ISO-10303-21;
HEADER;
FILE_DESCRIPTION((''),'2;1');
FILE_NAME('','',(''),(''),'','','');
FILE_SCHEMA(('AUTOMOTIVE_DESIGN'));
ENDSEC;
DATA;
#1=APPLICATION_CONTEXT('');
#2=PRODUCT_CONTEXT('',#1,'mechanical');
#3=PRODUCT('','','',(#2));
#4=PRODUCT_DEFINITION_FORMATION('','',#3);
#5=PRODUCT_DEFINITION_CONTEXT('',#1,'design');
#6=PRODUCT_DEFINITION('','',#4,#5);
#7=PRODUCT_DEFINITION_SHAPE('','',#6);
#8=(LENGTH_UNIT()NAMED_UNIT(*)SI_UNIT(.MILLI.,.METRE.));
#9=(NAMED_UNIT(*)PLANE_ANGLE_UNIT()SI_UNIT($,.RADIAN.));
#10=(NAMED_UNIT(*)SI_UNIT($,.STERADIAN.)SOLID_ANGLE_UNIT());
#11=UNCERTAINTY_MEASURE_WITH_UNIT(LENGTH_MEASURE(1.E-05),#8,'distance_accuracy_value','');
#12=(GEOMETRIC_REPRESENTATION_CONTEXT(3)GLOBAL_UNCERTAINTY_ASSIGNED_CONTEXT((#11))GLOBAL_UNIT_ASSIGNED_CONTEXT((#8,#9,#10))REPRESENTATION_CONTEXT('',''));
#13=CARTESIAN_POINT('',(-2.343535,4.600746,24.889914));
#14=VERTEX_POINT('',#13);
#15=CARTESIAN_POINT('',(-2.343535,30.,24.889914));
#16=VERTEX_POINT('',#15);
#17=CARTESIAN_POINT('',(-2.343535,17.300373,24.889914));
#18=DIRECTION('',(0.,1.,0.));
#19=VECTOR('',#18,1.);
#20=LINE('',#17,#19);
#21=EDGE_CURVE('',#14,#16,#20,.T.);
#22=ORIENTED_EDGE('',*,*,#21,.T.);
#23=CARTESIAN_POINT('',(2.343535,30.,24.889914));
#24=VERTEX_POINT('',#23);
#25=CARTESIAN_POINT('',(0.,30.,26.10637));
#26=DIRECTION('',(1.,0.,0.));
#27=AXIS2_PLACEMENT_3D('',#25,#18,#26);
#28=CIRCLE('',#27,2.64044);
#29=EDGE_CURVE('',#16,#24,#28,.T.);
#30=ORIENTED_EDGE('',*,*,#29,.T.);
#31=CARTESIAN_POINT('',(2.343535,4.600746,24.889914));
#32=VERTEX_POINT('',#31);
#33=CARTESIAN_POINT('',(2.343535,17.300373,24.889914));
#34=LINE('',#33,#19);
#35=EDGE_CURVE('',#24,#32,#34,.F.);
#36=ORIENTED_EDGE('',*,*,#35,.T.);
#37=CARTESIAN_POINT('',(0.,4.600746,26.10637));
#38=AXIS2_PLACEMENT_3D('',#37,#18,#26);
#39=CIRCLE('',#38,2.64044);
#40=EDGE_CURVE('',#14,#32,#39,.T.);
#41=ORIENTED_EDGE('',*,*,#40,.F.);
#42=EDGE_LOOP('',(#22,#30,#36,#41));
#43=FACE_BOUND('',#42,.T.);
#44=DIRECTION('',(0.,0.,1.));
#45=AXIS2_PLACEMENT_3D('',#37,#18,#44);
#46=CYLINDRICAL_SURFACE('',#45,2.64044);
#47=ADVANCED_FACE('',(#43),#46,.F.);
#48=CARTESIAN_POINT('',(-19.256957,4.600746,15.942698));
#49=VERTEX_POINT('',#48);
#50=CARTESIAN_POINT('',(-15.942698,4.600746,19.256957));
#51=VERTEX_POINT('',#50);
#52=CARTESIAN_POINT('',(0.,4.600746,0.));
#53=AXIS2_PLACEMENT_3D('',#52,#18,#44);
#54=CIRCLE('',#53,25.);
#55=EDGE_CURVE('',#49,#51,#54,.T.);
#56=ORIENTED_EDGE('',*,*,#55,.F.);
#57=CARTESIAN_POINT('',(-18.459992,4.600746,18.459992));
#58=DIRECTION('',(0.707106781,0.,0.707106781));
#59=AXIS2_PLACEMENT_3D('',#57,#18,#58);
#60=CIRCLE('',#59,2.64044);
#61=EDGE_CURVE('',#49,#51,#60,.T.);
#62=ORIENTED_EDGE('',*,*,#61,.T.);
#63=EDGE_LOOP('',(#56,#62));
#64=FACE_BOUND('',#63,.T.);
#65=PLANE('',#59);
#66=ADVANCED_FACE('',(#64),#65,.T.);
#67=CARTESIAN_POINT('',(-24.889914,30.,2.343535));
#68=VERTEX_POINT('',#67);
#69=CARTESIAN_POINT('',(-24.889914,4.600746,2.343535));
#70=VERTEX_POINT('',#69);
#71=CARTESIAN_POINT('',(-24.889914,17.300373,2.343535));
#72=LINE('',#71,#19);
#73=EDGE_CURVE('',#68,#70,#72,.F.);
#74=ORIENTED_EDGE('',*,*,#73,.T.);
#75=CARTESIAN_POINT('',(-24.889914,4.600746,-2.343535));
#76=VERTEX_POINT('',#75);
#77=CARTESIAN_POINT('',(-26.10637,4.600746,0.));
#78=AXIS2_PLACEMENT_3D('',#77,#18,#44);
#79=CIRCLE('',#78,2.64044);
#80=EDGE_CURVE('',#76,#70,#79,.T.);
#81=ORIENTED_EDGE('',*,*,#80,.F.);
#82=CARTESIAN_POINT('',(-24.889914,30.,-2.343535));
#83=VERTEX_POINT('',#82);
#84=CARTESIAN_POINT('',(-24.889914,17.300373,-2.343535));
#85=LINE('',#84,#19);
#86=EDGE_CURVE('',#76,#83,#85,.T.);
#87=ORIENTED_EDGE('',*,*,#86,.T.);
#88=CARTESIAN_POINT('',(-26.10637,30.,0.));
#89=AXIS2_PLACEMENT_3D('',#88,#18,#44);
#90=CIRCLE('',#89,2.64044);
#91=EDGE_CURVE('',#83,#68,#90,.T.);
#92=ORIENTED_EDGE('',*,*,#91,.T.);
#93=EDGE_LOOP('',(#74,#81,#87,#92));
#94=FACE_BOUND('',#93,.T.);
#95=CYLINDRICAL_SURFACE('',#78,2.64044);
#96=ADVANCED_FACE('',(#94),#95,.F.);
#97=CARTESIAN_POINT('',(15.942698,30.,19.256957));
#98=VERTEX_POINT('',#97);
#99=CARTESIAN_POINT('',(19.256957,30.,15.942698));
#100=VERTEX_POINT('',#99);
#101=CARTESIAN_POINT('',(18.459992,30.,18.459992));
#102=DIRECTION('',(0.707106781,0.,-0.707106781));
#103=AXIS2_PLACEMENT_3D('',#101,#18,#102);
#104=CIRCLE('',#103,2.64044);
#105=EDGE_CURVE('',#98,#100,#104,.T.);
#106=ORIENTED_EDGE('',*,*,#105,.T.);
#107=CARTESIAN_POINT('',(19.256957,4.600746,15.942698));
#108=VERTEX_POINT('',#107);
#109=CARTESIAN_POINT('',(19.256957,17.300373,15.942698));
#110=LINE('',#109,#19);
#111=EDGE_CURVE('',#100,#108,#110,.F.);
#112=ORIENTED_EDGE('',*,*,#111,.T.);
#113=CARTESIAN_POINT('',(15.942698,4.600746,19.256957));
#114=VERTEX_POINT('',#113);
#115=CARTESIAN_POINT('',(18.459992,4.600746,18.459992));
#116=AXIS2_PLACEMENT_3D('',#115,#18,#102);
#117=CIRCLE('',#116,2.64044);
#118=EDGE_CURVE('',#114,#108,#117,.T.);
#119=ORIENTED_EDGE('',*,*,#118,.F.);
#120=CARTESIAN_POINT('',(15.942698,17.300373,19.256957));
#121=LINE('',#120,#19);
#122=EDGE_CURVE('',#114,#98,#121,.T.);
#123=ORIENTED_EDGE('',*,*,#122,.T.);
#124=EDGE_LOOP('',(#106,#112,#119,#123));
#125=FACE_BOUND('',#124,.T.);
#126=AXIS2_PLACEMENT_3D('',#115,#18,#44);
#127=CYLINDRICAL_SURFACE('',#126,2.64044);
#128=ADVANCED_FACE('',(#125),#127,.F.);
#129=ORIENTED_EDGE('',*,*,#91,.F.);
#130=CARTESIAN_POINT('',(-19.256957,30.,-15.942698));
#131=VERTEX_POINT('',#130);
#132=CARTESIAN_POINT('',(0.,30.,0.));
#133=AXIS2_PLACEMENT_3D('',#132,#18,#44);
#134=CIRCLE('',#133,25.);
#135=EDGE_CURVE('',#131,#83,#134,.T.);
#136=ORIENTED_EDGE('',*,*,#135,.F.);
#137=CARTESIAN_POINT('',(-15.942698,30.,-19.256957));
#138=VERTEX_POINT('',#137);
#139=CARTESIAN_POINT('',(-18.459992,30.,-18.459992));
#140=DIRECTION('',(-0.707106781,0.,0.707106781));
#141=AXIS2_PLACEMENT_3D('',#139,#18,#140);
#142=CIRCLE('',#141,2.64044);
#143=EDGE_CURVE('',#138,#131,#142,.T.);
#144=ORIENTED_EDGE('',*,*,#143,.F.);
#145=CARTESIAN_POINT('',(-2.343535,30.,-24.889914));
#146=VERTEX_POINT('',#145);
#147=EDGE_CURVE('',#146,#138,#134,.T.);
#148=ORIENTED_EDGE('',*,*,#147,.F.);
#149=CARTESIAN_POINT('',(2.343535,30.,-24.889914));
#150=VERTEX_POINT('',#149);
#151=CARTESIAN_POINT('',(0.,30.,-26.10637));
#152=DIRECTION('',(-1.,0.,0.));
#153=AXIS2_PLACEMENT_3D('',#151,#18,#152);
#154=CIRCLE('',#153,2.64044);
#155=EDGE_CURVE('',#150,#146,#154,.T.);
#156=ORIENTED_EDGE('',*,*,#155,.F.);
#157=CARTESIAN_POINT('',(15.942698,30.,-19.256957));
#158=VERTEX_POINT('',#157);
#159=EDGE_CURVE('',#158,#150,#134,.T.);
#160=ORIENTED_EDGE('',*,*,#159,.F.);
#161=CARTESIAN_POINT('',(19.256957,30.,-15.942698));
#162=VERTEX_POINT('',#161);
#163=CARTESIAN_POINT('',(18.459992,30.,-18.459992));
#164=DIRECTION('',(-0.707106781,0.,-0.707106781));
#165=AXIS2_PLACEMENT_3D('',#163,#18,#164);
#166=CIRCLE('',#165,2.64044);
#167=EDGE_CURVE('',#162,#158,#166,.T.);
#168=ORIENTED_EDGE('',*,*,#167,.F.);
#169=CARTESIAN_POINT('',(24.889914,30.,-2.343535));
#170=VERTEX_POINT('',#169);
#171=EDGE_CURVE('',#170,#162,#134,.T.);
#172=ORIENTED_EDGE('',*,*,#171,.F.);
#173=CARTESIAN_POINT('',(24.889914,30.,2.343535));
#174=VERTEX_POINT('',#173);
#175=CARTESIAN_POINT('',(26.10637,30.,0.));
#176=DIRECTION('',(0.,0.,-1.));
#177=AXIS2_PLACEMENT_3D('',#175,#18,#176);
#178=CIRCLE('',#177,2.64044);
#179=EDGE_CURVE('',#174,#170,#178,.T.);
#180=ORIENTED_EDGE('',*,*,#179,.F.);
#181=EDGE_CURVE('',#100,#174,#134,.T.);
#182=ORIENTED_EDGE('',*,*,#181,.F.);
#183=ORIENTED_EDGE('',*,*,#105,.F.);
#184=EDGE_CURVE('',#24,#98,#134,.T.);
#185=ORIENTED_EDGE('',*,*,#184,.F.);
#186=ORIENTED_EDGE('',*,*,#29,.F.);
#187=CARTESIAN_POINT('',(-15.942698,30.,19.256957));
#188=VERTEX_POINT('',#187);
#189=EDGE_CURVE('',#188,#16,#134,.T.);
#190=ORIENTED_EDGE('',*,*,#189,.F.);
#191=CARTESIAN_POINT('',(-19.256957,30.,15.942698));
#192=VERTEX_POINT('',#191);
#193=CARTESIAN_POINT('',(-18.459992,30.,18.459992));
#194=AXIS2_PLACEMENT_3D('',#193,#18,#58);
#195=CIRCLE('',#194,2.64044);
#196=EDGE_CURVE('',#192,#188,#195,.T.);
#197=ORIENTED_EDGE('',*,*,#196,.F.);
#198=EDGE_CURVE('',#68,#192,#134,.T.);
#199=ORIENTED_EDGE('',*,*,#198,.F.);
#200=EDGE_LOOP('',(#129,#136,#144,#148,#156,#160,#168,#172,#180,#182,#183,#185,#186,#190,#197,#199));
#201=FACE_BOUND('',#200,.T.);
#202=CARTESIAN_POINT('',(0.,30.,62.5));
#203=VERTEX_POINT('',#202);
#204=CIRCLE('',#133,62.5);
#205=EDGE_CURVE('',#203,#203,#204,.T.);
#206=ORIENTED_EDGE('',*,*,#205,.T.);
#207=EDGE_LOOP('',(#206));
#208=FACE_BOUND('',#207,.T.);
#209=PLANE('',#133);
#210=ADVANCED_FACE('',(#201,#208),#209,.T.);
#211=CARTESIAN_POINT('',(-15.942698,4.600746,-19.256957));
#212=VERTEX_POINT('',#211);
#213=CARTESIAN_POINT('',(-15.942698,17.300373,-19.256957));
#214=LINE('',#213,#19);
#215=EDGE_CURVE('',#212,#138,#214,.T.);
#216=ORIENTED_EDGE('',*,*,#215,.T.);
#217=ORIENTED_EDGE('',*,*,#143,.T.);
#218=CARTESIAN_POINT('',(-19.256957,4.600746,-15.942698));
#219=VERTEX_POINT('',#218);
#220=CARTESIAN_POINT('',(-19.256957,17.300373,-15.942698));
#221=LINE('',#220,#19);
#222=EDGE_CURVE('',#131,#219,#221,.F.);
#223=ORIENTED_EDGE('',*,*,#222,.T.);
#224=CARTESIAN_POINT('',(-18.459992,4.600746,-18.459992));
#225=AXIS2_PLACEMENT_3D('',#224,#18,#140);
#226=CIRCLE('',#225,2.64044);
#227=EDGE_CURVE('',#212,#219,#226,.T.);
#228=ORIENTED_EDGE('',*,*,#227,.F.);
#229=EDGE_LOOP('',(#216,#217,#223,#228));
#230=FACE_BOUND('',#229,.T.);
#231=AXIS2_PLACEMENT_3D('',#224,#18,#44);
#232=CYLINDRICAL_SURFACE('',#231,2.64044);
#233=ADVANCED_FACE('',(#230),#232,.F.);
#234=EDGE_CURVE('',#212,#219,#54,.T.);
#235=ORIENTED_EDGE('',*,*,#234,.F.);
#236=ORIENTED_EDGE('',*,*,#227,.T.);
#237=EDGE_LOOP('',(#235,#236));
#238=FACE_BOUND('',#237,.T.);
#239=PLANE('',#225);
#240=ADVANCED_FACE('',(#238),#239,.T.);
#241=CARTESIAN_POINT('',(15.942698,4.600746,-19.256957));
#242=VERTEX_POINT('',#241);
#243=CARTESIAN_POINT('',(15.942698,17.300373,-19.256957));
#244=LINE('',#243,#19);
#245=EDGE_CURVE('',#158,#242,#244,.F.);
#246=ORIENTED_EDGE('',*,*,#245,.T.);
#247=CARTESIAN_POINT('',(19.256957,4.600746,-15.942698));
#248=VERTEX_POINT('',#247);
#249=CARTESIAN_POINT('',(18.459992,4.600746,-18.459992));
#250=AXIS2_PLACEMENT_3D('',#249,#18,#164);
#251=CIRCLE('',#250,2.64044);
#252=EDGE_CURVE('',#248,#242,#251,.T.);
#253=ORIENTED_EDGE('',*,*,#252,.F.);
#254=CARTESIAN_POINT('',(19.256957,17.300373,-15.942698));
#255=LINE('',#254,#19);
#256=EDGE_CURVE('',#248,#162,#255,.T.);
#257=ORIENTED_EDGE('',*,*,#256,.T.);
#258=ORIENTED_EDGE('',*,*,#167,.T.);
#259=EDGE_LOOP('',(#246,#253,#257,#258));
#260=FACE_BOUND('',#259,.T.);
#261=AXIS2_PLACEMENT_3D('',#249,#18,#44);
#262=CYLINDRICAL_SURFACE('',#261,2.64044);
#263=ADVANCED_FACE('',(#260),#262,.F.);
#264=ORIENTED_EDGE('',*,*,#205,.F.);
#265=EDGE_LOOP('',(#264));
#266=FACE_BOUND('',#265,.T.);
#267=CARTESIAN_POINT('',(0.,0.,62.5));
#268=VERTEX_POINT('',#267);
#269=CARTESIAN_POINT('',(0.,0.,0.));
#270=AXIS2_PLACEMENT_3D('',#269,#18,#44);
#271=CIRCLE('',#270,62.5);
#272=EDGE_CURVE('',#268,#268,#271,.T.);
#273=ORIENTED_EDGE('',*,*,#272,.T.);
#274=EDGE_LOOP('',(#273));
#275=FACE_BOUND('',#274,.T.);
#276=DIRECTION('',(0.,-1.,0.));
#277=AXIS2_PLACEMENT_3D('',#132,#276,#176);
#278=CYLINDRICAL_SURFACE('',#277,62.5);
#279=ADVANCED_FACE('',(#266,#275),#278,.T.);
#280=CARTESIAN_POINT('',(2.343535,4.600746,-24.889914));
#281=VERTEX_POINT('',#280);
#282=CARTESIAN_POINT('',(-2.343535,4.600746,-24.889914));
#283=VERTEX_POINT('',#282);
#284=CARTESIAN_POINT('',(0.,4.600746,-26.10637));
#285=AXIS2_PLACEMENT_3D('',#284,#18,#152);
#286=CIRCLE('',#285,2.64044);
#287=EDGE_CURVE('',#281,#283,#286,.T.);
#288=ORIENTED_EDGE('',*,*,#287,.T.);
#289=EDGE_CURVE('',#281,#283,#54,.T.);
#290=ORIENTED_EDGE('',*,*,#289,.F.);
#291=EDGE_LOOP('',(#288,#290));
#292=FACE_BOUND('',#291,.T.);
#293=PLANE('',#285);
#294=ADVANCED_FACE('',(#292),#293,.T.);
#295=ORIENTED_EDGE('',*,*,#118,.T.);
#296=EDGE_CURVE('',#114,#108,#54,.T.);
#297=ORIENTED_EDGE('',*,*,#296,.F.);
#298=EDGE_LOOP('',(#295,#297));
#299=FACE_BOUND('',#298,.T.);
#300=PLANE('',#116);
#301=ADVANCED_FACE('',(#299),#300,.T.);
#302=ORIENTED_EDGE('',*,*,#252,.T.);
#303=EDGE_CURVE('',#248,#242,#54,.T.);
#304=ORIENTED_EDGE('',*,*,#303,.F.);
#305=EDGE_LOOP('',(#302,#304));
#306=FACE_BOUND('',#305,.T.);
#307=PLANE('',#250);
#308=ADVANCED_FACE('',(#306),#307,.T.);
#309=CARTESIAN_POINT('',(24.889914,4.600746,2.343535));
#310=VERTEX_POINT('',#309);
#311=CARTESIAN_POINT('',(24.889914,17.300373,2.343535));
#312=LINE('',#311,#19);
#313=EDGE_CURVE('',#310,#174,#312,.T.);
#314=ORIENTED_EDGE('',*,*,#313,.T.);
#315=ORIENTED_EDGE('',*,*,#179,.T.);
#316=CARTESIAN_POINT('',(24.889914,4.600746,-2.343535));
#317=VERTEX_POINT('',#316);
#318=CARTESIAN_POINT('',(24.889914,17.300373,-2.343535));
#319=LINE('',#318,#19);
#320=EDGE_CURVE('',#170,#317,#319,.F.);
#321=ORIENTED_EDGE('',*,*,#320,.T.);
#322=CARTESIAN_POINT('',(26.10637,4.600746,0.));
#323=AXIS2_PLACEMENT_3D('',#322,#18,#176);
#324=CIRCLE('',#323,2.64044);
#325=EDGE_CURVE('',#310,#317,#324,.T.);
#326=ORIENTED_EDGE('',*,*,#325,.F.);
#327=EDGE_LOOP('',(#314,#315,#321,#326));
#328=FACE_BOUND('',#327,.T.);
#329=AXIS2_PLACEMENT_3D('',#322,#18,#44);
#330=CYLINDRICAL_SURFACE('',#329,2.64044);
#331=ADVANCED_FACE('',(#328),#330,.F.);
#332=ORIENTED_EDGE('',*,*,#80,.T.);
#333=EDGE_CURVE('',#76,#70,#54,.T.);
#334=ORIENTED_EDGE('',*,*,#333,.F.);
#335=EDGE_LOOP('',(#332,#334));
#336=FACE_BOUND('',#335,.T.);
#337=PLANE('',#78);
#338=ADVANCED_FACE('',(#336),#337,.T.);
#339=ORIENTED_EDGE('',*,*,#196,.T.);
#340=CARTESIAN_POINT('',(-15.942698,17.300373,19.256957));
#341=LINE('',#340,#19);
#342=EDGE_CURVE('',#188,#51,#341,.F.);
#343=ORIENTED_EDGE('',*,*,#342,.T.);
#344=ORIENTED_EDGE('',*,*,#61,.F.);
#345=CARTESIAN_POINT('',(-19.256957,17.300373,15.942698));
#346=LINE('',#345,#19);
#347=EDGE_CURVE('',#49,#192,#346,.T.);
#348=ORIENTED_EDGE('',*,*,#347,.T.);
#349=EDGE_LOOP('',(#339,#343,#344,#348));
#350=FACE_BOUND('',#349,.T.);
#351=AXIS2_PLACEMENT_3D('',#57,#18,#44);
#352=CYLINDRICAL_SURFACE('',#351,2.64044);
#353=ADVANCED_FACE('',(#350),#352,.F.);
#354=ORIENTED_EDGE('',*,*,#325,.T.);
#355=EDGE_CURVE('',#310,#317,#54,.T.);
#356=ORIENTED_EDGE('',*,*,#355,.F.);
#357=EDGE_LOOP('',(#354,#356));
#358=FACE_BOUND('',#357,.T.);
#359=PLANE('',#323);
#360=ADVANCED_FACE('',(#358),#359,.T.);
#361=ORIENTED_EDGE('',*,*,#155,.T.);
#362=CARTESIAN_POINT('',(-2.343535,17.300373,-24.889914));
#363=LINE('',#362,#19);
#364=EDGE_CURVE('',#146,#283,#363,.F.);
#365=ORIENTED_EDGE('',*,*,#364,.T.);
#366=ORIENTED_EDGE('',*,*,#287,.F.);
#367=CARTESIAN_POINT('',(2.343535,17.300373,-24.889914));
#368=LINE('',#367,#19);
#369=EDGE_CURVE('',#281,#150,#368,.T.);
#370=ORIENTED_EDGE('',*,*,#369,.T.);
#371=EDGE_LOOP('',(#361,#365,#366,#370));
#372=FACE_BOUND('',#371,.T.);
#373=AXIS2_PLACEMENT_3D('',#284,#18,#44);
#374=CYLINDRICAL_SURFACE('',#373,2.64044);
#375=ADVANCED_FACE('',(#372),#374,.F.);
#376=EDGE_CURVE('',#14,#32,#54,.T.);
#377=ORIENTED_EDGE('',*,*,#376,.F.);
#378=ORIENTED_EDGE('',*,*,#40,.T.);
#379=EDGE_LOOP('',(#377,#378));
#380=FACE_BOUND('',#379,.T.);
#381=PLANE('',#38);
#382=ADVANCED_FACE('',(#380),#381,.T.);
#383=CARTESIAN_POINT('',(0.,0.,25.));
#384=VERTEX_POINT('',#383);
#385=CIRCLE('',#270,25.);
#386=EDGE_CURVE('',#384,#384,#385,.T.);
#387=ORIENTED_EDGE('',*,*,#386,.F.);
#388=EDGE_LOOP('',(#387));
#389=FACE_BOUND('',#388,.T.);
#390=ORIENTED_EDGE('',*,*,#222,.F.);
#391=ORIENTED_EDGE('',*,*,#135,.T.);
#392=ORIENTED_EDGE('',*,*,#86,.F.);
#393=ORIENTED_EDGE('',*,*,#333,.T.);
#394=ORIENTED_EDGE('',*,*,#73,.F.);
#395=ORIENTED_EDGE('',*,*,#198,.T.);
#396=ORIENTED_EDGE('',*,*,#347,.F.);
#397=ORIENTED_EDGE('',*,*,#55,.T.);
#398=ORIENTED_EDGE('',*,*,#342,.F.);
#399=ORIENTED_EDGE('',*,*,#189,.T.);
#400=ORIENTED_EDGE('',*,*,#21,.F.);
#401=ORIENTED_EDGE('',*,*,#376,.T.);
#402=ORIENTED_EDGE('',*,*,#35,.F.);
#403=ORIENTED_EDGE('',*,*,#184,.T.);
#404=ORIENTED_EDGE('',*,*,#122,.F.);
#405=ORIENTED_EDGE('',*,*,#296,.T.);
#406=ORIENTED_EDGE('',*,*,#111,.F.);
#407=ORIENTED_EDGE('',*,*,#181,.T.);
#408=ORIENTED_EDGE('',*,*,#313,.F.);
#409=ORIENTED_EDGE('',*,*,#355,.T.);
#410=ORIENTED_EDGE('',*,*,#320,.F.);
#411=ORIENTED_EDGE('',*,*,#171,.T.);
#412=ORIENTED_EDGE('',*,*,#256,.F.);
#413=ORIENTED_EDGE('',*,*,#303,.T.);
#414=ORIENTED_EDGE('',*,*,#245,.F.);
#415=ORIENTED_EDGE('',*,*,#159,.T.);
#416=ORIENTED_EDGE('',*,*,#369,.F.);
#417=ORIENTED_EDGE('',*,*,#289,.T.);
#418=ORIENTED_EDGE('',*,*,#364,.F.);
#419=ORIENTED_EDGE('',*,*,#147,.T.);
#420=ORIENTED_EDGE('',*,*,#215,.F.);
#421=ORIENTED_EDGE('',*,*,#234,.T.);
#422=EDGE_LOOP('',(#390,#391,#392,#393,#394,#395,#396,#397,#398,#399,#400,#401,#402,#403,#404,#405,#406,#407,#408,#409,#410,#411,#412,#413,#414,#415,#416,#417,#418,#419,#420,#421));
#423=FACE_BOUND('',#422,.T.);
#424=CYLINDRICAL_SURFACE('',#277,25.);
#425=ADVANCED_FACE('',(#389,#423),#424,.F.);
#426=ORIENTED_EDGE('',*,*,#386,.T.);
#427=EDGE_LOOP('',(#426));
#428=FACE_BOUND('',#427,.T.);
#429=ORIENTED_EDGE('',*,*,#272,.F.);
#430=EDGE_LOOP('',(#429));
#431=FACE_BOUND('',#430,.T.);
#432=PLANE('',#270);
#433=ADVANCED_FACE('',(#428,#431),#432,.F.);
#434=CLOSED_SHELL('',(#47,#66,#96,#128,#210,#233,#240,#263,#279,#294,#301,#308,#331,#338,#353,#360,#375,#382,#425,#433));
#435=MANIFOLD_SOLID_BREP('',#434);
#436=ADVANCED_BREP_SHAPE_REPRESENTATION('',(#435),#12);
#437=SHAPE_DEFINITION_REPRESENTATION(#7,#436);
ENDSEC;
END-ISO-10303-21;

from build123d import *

# Parameters (mm, degrees)
SKETCH1_R           = 62.5
BOSS_EXTRUDE1_DEPTH = 30
SKETCH2_R           = 25
CUT_EXTRUDE1_DEPTH  = 94.340773513
SKETCH3_R           = 2.640439934
CUT_EXTRUDE2_DEPTH  = 25.399254146
CIRPATTERN1_COUNT   = 8


with BuildPart() as part:
    # Sketch1 → Boss-Extrude1 (new body)
    with BuildSketch(Plane(origin=(0, 0, 0), x_dir=(1, 0, 0), z_dir=(0, 1, 0))):
        Circle(SKETCH1_R)
    extrude(amount=BOSS_EXTRUDE1_DEPTH)

    # Sketch2 → Cut-Extrude1 (cut, through all)
    with BuildSketch(Plane(origin=(0, 0, 0), x_dir=(1, 0, 0), z_dir=(0, 1, 0))):
        Circle(SKETCH2_R)
    extrude(amount=CUT_EXTRUDE1_DEPTH, mode=Mode.SUBTRACT)

    # Sketch3 → Cut-Extrude2 (cut)
    with BuildSketch(Plane(origin=(0, 30, 0), x_dir=(1, 0, 0), z_dir=(0, 1, 0))):
        with Locations((-26.106370388, 0)):
            Circle(SKETCH3_R)
    cut_extrude2 = extrude(amount=-CUT_EXTRUDE2_DEPTH, mode=Mode.SUBTRACT)

    # CirPattern1: Cut-Extrude2 ×8 about axis
    cirpattern1_axis = Axis((0, 0, 0), (0, 1, 0))
    for i in range(1, CIRPATTERN1_COUNT):
        add(cut_extrude2.rotate(cirpattern1_axis, i * 360 / CIRPATTERN1_COUNT), mode=Mode.SUBTRACT)


solid = part.part
